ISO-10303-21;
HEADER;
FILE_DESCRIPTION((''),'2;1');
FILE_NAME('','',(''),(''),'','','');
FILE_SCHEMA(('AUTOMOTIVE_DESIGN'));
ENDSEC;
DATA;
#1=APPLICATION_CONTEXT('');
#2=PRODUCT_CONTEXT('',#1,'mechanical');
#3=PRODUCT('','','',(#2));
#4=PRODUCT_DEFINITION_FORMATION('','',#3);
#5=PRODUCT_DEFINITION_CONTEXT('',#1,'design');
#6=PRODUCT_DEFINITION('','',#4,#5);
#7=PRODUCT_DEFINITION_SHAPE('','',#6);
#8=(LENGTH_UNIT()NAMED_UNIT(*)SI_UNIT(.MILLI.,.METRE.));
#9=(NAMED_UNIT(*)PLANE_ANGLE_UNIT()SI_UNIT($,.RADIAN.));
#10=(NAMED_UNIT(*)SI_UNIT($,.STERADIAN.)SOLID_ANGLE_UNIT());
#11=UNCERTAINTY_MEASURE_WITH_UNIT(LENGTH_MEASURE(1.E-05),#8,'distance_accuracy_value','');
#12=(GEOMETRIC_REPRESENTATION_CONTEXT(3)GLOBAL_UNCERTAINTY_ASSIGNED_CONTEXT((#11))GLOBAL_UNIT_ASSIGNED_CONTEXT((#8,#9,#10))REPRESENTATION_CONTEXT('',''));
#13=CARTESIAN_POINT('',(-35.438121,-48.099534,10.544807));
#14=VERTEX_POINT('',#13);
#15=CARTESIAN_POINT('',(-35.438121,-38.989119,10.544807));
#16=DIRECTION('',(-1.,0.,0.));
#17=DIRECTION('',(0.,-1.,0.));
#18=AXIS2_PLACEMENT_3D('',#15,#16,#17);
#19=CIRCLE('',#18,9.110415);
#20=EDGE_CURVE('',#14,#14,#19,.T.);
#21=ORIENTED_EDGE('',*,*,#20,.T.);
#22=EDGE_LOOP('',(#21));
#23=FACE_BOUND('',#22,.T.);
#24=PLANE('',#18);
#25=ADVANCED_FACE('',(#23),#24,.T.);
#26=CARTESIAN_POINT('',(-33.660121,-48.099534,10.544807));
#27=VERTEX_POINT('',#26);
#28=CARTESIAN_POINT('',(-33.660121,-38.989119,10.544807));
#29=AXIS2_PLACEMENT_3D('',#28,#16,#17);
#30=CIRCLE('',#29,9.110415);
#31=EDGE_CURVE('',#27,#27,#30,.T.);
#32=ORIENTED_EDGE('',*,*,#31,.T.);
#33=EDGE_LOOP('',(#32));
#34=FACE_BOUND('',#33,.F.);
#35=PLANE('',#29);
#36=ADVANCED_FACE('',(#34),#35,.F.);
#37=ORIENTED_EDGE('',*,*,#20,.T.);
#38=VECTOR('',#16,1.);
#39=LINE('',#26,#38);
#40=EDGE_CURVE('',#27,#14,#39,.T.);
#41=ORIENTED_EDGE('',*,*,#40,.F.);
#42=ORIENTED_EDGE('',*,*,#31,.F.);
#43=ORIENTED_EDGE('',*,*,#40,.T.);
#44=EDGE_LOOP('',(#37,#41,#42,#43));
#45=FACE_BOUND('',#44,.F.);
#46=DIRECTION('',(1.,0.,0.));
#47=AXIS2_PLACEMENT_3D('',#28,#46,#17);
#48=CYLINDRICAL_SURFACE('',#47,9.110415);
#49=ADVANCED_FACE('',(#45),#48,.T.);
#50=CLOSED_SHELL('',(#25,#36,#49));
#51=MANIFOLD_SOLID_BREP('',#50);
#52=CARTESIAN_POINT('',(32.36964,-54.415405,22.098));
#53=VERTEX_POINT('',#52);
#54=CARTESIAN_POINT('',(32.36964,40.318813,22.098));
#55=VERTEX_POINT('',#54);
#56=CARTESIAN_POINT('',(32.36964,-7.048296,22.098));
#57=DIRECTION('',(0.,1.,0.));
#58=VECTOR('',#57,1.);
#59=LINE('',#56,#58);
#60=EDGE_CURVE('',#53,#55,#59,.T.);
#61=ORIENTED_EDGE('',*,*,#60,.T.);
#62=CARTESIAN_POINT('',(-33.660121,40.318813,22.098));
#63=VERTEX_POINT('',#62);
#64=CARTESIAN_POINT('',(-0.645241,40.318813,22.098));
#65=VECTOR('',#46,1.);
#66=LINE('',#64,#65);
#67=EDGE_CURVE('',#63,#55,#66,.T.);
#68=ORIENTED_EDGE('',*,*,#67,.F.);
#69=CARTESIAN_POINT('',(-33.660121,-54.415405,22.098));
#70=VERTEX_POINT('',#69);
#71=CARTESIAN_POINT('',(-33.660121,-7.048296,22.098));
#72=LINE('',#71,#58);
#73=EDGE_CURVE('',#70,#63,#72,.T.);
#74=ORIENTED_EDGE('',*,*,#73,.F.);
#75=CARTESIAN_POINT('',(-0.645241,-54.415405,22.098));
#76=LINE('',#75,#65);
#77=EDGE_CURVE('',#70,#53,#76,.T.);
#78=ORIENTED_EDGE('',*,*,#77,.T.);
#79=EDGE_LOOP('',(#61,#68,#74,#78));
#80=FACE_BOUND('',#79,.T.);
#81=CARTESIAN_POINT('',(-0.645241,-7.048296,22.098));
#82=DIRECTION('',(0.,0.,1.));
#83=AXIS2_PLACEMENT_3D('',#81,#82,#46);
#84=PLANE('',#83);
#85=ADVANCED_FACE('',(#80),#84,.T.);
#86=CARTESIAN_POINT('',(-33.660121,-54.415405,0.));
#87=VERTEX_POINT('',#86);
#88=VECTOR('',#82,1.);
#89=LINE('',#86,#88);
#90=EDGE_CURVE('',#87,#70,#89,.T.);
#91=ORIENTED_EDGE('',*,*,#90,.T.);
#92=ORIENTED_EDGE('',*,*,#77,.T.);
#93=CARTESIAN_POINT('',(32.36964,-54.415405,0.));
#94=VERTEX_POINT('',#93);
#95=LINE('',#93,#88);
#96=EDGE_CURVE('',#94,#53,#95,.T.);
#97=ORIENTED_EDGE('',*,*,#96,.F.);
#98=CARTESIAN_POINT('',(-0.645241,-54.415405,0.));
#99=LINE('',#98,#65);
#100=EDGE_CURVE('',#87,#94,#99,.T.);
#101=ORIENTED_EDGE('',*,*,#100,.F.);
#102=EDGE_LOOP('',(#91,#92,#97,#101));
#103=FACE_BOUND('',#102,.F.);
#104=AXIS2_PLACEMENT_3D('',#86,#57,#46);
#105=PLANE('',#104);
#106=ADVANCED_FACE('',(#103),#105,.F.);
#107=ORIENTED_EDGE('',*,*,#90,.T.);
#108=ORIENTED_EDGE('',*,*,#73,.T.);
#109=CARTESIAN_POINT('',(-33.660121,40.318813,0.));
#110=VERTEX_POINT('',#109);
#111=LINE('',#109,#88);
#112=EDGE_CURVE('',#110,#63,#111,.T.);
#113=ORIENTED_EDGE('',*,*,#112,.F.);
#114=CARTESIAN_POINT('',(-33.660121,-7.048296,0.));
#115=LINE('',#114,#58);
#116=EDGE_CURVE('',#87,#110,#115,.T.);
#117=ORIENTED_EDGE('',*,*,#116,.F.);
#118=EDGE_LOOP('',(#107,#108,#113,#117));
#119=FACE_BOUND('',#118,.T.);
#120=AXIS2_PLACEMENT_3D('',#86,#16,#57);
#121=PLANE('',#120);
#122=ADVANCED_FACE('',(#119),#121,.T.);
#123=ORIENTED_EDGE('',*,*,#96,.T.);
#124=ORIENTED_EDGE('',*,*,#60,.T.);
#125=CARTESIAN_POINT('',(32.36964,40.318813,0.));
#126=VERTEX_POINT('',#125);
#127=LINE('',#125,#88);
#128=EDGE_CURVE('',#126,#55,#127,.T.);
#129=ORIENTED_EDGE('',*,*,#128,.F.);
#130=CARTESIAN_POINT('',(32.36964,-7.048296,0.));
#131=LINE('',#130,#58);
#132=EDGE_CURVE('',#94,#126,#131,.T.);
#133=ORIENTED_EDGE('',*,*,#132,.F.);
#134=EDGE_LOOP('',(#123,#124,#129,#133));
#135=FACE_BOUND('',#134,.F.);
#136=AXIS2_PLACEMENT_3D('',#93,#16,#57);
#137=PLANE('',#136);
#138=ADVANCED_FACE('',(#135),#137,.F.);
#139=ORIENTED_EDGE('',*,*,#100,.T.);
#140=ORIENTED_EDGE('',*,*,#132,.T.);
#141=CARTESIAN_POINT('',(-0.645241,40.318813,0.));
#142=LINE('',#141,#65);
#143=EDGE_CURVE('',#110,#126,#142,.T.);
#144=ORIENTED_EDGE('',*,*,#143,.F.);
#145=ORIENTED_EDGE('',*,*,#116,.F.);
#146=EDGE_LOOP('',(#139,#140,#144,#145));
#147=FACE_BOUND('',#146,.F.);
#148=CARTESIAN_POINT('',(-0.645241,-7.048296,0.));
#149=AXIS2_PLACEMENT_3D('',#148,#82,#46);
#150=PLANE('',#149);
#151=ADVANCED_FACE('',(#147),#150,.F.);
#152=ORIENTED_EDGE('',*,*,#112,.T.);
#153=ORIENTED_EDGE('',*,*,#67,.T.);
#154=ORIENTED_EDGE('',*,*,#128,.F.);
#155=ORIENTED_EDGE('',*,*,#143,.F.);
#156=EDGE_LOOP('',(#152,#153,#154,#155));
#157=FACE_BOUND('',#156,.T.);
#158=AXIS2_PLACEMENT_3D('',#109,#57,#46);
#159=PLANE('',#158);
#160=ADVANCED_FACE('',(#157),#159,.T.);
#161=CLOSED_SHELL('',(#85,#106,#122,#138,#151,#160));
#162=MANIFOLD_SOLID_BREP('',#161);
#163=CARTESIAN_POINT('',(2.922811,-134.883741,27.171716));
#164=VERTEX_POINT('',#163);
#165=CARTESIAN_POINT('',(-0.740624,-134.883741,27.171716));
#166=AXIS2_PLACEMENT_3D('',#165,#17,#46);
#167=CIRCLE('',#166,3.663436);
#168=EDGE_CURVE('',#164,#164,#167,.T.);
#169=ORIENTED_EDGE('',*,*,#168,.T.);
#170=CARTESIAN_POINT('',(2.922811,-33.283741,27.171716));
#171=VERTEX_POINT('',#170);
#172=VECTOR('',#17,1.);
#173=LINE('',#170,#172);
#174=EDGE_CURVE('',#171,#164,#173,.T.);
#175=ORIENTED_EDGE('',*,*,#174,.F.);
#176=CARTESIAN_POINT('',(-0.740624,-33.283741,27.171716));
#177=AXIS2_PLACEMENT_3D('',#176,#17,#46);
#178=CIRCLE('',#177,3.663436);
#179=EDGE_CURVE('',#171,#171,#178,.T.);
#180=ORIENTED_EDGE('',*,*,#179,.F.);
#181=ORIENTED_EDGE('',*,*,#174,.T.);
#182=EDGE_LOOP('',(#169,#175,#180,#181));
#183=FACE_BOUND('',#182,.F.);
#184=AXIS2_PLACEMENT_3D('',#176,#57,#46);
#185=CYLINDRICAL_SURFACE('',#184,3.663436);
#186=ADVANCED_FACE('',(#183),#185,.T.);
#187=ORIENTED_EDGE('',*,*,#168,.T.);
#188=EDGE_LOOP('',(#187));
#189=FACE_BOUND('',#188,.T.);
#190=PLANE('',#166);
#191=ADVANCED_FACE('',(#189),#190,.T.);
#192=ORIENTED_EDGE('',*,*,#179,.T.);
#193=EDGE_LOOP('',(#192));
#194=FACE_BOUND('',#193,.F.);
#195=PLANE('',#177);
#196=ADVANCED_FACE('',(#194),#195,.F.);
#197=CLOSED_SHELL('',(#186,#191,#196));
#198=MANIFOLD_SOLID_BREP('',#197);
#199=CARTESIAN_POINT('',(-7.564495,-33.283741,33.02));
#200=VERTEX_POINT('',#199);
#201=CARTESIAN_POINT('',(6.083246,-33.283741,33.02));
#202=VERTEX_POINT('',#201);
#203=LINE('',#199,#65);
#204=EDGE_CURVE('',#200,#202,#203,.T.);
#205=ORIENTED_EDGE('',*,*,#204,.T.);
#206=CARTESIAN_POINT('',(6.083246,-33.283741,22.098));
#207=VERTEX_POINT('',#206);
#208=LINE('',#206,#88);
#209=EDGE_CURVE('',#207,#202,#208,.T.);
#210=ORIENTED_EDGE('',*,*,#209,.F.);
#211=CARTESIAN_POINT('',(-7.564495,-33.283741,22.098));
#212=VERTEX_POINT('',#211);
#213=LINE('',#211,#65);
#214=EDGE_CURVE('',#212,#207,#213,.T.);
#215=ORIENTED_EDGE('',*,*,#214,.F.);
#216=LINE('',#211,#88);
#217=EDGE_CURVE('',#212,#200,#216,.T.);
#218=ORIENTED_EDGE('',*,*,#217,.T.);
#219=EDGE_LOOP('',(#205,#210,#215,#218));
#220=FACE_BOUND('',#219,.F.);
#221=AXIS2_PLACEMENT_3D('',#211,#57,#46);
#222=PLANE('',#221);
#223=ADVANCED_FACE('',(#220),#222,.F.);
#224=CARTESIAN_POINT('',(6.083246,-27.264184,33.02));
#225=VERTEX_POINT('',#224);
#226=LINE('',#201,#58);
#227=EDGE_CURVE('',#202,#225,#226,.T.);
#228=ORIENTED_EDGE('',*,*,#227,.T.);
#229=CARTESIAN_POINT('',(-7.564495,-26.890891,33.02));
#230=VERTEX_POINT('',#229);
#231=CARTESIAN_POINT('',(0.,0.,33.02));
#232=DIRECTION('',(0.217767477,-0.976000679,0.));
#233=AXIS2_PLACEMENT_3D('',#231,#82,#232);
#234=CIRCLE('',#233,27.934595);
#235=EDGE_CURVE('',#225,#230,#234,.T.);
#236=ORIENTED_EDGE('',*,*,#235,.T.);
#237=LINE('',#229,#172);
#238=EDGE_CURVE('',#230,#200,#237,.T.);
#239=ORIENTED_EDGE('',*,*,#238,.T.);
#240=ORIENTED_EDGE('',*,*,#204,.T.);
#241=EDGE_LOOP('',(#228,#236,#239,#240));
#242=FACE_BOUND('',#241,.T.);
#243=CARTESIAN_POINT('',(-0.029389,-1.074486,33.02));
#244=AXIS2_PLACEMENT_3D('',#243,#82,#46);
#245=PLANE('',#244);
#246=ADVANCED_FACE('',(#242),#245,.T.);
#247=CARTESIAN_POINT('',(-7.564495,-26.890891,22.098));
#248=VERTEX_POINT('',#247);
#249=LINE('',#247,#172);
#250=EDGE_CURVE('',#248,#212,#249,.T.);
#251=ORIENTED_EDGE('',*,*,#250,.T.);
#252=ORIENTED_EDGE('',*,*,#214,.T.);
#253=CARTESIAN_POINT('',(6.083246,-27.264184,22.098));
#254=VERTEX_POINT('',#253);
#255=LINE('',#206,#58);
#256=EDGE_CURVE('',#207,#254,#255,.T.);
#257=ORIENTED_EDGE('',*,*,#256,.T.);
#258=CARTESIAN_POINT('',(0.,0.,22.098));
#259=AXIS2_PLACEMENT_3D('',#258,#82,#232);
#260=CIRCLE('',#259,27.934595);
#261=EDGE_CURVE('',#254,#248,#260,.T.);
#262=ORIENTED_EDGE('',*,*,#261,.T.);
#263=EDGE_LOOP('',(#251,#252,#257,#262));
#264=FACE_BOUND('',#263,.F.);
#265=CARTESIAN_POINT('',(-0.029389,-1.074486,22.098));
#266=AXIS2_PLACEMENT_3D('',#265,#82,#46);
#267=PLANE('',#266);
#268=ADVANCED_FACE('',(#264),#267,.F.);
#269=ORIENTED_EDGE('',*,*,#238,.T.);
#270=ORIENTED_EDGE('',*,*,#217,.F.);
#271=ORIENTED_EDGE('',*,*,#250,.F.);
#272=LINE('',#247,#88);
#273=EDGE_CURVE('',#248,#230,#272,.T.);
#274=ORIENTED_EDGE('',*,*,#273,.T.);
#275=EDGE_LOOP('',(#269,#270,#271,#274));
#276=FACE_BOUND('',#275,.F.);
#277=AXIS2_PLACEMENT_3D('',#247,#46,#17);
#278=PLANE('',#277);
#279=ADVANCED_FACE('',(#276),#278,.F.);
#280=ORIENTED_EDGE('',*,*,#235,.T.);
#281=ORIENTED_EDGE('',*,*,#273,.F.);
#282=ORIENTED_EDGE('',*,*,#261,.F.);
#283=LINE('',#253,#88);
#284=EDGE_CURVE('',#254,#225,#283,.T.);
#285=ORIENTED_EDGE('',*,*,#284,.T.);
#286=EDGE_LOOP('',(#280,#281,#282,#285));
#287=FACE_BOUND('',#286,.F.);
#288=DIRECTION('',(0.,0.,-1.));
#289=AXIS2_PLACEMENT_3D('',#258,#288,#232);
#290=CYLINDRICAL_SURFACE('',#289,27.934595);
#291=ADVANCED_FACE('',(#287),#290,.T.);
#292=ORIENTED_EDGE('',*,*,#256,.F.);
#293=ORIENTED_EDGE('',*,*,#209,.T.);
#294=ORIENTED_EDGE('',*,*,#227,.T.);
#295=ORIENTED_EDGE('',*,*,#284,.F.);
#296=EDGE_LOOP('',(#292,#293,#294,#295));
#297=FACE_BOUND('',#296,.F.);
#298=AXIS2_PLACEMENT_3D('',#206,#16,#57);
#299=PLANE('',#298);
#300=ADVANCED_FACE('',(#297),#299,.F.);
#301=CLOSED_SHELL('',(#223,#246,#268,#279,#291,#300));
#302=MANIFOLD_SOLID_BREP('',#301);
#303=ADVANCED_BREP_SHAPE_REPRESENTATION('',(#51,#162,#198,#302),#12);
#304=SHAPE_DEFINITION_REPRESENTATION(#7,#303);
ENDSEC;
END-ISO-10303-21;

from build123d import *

# Parameters (mm, degrees)
F0_W     = 66.0297609866
F0_H     = 94.7342179716
F1_DEPTH = 22.098
F3_DEPTH = 10.922
F4_R     = 3.6634356374
F5_DEPTH = 101.6
F6_R     = 9.1104151175
F7_DEPTH = 1.778


with BuildPart() as f1:
    # F0 (on Top) → F1 (new body)
    with BuildSketch(Plane.XY):
        with Locations((-0.6452407688, -7.0482958108)):
            Rectangle(F0_W, F0_H)
    extrude(amount=F1_DEPTH)


with BuildPart() as f3:
    # F2 (on face) → F3 (new body)
    with BuildSketch(Plane.XY.offset(22.098)):
        with BuildLine():
            ThreePointArc((6.0832463205, -27.2641839674), (21.797644794, -17.470097156), (27.9345952755, 0))
            ThreePointArc((27.9345952755, 0), (-16.8675799898, 22.2671587432), (-7.5644949102, -26.890891208))
            ThreePointArc((-7.5644949102, -26.890891208), (-0.7637808699, -27.9241517685), (6.0832463205, -27.2641839674))
        make_face()
        with BuildLine():
            ThreePointArc((6.0832463205, -27.2641839674), (-0.7637808699, -27.9241517685), (-7.5644949102, -26.890891208))
            Line((-7.5644949102, -26.890891208), (-7.5644949102, -33.2837412526))
            Line((-7.5644949102, -33.2837412526), (6.0832463205, -33.2837412526))
            Line((6.0832463205, -33.2837412526), (6.0832463205, -27.2641839674))
        make_face()
    extrude(amount=F3_DEPTH)


with BuildPart() as f5:
    # F4 (on face) → F5 (new body)
    with BuildSketch(Plane.XZ.offset(33.2837412526)):
        with Locations((-0.7406242949, 27.171716094)):
            Circle(F4_R)
    extrude(amount=F5_DEPTH)


with BuildPart() as f7:
    # F6 (on face) → F7 (new body)
    with BuildSketch(Plane(origin=(-33.6601212621, 0, 0), x_dir=(0, -1, 0), z_dir=(-1, 0, 0))):
        with Locations((38.9891192317, 10.5448067188)):
            Circle(F6_R)
    extrude(amount=F7_DEPTH)


solid = Compound([f1.part, f3.part, f5.part, f7.part])
